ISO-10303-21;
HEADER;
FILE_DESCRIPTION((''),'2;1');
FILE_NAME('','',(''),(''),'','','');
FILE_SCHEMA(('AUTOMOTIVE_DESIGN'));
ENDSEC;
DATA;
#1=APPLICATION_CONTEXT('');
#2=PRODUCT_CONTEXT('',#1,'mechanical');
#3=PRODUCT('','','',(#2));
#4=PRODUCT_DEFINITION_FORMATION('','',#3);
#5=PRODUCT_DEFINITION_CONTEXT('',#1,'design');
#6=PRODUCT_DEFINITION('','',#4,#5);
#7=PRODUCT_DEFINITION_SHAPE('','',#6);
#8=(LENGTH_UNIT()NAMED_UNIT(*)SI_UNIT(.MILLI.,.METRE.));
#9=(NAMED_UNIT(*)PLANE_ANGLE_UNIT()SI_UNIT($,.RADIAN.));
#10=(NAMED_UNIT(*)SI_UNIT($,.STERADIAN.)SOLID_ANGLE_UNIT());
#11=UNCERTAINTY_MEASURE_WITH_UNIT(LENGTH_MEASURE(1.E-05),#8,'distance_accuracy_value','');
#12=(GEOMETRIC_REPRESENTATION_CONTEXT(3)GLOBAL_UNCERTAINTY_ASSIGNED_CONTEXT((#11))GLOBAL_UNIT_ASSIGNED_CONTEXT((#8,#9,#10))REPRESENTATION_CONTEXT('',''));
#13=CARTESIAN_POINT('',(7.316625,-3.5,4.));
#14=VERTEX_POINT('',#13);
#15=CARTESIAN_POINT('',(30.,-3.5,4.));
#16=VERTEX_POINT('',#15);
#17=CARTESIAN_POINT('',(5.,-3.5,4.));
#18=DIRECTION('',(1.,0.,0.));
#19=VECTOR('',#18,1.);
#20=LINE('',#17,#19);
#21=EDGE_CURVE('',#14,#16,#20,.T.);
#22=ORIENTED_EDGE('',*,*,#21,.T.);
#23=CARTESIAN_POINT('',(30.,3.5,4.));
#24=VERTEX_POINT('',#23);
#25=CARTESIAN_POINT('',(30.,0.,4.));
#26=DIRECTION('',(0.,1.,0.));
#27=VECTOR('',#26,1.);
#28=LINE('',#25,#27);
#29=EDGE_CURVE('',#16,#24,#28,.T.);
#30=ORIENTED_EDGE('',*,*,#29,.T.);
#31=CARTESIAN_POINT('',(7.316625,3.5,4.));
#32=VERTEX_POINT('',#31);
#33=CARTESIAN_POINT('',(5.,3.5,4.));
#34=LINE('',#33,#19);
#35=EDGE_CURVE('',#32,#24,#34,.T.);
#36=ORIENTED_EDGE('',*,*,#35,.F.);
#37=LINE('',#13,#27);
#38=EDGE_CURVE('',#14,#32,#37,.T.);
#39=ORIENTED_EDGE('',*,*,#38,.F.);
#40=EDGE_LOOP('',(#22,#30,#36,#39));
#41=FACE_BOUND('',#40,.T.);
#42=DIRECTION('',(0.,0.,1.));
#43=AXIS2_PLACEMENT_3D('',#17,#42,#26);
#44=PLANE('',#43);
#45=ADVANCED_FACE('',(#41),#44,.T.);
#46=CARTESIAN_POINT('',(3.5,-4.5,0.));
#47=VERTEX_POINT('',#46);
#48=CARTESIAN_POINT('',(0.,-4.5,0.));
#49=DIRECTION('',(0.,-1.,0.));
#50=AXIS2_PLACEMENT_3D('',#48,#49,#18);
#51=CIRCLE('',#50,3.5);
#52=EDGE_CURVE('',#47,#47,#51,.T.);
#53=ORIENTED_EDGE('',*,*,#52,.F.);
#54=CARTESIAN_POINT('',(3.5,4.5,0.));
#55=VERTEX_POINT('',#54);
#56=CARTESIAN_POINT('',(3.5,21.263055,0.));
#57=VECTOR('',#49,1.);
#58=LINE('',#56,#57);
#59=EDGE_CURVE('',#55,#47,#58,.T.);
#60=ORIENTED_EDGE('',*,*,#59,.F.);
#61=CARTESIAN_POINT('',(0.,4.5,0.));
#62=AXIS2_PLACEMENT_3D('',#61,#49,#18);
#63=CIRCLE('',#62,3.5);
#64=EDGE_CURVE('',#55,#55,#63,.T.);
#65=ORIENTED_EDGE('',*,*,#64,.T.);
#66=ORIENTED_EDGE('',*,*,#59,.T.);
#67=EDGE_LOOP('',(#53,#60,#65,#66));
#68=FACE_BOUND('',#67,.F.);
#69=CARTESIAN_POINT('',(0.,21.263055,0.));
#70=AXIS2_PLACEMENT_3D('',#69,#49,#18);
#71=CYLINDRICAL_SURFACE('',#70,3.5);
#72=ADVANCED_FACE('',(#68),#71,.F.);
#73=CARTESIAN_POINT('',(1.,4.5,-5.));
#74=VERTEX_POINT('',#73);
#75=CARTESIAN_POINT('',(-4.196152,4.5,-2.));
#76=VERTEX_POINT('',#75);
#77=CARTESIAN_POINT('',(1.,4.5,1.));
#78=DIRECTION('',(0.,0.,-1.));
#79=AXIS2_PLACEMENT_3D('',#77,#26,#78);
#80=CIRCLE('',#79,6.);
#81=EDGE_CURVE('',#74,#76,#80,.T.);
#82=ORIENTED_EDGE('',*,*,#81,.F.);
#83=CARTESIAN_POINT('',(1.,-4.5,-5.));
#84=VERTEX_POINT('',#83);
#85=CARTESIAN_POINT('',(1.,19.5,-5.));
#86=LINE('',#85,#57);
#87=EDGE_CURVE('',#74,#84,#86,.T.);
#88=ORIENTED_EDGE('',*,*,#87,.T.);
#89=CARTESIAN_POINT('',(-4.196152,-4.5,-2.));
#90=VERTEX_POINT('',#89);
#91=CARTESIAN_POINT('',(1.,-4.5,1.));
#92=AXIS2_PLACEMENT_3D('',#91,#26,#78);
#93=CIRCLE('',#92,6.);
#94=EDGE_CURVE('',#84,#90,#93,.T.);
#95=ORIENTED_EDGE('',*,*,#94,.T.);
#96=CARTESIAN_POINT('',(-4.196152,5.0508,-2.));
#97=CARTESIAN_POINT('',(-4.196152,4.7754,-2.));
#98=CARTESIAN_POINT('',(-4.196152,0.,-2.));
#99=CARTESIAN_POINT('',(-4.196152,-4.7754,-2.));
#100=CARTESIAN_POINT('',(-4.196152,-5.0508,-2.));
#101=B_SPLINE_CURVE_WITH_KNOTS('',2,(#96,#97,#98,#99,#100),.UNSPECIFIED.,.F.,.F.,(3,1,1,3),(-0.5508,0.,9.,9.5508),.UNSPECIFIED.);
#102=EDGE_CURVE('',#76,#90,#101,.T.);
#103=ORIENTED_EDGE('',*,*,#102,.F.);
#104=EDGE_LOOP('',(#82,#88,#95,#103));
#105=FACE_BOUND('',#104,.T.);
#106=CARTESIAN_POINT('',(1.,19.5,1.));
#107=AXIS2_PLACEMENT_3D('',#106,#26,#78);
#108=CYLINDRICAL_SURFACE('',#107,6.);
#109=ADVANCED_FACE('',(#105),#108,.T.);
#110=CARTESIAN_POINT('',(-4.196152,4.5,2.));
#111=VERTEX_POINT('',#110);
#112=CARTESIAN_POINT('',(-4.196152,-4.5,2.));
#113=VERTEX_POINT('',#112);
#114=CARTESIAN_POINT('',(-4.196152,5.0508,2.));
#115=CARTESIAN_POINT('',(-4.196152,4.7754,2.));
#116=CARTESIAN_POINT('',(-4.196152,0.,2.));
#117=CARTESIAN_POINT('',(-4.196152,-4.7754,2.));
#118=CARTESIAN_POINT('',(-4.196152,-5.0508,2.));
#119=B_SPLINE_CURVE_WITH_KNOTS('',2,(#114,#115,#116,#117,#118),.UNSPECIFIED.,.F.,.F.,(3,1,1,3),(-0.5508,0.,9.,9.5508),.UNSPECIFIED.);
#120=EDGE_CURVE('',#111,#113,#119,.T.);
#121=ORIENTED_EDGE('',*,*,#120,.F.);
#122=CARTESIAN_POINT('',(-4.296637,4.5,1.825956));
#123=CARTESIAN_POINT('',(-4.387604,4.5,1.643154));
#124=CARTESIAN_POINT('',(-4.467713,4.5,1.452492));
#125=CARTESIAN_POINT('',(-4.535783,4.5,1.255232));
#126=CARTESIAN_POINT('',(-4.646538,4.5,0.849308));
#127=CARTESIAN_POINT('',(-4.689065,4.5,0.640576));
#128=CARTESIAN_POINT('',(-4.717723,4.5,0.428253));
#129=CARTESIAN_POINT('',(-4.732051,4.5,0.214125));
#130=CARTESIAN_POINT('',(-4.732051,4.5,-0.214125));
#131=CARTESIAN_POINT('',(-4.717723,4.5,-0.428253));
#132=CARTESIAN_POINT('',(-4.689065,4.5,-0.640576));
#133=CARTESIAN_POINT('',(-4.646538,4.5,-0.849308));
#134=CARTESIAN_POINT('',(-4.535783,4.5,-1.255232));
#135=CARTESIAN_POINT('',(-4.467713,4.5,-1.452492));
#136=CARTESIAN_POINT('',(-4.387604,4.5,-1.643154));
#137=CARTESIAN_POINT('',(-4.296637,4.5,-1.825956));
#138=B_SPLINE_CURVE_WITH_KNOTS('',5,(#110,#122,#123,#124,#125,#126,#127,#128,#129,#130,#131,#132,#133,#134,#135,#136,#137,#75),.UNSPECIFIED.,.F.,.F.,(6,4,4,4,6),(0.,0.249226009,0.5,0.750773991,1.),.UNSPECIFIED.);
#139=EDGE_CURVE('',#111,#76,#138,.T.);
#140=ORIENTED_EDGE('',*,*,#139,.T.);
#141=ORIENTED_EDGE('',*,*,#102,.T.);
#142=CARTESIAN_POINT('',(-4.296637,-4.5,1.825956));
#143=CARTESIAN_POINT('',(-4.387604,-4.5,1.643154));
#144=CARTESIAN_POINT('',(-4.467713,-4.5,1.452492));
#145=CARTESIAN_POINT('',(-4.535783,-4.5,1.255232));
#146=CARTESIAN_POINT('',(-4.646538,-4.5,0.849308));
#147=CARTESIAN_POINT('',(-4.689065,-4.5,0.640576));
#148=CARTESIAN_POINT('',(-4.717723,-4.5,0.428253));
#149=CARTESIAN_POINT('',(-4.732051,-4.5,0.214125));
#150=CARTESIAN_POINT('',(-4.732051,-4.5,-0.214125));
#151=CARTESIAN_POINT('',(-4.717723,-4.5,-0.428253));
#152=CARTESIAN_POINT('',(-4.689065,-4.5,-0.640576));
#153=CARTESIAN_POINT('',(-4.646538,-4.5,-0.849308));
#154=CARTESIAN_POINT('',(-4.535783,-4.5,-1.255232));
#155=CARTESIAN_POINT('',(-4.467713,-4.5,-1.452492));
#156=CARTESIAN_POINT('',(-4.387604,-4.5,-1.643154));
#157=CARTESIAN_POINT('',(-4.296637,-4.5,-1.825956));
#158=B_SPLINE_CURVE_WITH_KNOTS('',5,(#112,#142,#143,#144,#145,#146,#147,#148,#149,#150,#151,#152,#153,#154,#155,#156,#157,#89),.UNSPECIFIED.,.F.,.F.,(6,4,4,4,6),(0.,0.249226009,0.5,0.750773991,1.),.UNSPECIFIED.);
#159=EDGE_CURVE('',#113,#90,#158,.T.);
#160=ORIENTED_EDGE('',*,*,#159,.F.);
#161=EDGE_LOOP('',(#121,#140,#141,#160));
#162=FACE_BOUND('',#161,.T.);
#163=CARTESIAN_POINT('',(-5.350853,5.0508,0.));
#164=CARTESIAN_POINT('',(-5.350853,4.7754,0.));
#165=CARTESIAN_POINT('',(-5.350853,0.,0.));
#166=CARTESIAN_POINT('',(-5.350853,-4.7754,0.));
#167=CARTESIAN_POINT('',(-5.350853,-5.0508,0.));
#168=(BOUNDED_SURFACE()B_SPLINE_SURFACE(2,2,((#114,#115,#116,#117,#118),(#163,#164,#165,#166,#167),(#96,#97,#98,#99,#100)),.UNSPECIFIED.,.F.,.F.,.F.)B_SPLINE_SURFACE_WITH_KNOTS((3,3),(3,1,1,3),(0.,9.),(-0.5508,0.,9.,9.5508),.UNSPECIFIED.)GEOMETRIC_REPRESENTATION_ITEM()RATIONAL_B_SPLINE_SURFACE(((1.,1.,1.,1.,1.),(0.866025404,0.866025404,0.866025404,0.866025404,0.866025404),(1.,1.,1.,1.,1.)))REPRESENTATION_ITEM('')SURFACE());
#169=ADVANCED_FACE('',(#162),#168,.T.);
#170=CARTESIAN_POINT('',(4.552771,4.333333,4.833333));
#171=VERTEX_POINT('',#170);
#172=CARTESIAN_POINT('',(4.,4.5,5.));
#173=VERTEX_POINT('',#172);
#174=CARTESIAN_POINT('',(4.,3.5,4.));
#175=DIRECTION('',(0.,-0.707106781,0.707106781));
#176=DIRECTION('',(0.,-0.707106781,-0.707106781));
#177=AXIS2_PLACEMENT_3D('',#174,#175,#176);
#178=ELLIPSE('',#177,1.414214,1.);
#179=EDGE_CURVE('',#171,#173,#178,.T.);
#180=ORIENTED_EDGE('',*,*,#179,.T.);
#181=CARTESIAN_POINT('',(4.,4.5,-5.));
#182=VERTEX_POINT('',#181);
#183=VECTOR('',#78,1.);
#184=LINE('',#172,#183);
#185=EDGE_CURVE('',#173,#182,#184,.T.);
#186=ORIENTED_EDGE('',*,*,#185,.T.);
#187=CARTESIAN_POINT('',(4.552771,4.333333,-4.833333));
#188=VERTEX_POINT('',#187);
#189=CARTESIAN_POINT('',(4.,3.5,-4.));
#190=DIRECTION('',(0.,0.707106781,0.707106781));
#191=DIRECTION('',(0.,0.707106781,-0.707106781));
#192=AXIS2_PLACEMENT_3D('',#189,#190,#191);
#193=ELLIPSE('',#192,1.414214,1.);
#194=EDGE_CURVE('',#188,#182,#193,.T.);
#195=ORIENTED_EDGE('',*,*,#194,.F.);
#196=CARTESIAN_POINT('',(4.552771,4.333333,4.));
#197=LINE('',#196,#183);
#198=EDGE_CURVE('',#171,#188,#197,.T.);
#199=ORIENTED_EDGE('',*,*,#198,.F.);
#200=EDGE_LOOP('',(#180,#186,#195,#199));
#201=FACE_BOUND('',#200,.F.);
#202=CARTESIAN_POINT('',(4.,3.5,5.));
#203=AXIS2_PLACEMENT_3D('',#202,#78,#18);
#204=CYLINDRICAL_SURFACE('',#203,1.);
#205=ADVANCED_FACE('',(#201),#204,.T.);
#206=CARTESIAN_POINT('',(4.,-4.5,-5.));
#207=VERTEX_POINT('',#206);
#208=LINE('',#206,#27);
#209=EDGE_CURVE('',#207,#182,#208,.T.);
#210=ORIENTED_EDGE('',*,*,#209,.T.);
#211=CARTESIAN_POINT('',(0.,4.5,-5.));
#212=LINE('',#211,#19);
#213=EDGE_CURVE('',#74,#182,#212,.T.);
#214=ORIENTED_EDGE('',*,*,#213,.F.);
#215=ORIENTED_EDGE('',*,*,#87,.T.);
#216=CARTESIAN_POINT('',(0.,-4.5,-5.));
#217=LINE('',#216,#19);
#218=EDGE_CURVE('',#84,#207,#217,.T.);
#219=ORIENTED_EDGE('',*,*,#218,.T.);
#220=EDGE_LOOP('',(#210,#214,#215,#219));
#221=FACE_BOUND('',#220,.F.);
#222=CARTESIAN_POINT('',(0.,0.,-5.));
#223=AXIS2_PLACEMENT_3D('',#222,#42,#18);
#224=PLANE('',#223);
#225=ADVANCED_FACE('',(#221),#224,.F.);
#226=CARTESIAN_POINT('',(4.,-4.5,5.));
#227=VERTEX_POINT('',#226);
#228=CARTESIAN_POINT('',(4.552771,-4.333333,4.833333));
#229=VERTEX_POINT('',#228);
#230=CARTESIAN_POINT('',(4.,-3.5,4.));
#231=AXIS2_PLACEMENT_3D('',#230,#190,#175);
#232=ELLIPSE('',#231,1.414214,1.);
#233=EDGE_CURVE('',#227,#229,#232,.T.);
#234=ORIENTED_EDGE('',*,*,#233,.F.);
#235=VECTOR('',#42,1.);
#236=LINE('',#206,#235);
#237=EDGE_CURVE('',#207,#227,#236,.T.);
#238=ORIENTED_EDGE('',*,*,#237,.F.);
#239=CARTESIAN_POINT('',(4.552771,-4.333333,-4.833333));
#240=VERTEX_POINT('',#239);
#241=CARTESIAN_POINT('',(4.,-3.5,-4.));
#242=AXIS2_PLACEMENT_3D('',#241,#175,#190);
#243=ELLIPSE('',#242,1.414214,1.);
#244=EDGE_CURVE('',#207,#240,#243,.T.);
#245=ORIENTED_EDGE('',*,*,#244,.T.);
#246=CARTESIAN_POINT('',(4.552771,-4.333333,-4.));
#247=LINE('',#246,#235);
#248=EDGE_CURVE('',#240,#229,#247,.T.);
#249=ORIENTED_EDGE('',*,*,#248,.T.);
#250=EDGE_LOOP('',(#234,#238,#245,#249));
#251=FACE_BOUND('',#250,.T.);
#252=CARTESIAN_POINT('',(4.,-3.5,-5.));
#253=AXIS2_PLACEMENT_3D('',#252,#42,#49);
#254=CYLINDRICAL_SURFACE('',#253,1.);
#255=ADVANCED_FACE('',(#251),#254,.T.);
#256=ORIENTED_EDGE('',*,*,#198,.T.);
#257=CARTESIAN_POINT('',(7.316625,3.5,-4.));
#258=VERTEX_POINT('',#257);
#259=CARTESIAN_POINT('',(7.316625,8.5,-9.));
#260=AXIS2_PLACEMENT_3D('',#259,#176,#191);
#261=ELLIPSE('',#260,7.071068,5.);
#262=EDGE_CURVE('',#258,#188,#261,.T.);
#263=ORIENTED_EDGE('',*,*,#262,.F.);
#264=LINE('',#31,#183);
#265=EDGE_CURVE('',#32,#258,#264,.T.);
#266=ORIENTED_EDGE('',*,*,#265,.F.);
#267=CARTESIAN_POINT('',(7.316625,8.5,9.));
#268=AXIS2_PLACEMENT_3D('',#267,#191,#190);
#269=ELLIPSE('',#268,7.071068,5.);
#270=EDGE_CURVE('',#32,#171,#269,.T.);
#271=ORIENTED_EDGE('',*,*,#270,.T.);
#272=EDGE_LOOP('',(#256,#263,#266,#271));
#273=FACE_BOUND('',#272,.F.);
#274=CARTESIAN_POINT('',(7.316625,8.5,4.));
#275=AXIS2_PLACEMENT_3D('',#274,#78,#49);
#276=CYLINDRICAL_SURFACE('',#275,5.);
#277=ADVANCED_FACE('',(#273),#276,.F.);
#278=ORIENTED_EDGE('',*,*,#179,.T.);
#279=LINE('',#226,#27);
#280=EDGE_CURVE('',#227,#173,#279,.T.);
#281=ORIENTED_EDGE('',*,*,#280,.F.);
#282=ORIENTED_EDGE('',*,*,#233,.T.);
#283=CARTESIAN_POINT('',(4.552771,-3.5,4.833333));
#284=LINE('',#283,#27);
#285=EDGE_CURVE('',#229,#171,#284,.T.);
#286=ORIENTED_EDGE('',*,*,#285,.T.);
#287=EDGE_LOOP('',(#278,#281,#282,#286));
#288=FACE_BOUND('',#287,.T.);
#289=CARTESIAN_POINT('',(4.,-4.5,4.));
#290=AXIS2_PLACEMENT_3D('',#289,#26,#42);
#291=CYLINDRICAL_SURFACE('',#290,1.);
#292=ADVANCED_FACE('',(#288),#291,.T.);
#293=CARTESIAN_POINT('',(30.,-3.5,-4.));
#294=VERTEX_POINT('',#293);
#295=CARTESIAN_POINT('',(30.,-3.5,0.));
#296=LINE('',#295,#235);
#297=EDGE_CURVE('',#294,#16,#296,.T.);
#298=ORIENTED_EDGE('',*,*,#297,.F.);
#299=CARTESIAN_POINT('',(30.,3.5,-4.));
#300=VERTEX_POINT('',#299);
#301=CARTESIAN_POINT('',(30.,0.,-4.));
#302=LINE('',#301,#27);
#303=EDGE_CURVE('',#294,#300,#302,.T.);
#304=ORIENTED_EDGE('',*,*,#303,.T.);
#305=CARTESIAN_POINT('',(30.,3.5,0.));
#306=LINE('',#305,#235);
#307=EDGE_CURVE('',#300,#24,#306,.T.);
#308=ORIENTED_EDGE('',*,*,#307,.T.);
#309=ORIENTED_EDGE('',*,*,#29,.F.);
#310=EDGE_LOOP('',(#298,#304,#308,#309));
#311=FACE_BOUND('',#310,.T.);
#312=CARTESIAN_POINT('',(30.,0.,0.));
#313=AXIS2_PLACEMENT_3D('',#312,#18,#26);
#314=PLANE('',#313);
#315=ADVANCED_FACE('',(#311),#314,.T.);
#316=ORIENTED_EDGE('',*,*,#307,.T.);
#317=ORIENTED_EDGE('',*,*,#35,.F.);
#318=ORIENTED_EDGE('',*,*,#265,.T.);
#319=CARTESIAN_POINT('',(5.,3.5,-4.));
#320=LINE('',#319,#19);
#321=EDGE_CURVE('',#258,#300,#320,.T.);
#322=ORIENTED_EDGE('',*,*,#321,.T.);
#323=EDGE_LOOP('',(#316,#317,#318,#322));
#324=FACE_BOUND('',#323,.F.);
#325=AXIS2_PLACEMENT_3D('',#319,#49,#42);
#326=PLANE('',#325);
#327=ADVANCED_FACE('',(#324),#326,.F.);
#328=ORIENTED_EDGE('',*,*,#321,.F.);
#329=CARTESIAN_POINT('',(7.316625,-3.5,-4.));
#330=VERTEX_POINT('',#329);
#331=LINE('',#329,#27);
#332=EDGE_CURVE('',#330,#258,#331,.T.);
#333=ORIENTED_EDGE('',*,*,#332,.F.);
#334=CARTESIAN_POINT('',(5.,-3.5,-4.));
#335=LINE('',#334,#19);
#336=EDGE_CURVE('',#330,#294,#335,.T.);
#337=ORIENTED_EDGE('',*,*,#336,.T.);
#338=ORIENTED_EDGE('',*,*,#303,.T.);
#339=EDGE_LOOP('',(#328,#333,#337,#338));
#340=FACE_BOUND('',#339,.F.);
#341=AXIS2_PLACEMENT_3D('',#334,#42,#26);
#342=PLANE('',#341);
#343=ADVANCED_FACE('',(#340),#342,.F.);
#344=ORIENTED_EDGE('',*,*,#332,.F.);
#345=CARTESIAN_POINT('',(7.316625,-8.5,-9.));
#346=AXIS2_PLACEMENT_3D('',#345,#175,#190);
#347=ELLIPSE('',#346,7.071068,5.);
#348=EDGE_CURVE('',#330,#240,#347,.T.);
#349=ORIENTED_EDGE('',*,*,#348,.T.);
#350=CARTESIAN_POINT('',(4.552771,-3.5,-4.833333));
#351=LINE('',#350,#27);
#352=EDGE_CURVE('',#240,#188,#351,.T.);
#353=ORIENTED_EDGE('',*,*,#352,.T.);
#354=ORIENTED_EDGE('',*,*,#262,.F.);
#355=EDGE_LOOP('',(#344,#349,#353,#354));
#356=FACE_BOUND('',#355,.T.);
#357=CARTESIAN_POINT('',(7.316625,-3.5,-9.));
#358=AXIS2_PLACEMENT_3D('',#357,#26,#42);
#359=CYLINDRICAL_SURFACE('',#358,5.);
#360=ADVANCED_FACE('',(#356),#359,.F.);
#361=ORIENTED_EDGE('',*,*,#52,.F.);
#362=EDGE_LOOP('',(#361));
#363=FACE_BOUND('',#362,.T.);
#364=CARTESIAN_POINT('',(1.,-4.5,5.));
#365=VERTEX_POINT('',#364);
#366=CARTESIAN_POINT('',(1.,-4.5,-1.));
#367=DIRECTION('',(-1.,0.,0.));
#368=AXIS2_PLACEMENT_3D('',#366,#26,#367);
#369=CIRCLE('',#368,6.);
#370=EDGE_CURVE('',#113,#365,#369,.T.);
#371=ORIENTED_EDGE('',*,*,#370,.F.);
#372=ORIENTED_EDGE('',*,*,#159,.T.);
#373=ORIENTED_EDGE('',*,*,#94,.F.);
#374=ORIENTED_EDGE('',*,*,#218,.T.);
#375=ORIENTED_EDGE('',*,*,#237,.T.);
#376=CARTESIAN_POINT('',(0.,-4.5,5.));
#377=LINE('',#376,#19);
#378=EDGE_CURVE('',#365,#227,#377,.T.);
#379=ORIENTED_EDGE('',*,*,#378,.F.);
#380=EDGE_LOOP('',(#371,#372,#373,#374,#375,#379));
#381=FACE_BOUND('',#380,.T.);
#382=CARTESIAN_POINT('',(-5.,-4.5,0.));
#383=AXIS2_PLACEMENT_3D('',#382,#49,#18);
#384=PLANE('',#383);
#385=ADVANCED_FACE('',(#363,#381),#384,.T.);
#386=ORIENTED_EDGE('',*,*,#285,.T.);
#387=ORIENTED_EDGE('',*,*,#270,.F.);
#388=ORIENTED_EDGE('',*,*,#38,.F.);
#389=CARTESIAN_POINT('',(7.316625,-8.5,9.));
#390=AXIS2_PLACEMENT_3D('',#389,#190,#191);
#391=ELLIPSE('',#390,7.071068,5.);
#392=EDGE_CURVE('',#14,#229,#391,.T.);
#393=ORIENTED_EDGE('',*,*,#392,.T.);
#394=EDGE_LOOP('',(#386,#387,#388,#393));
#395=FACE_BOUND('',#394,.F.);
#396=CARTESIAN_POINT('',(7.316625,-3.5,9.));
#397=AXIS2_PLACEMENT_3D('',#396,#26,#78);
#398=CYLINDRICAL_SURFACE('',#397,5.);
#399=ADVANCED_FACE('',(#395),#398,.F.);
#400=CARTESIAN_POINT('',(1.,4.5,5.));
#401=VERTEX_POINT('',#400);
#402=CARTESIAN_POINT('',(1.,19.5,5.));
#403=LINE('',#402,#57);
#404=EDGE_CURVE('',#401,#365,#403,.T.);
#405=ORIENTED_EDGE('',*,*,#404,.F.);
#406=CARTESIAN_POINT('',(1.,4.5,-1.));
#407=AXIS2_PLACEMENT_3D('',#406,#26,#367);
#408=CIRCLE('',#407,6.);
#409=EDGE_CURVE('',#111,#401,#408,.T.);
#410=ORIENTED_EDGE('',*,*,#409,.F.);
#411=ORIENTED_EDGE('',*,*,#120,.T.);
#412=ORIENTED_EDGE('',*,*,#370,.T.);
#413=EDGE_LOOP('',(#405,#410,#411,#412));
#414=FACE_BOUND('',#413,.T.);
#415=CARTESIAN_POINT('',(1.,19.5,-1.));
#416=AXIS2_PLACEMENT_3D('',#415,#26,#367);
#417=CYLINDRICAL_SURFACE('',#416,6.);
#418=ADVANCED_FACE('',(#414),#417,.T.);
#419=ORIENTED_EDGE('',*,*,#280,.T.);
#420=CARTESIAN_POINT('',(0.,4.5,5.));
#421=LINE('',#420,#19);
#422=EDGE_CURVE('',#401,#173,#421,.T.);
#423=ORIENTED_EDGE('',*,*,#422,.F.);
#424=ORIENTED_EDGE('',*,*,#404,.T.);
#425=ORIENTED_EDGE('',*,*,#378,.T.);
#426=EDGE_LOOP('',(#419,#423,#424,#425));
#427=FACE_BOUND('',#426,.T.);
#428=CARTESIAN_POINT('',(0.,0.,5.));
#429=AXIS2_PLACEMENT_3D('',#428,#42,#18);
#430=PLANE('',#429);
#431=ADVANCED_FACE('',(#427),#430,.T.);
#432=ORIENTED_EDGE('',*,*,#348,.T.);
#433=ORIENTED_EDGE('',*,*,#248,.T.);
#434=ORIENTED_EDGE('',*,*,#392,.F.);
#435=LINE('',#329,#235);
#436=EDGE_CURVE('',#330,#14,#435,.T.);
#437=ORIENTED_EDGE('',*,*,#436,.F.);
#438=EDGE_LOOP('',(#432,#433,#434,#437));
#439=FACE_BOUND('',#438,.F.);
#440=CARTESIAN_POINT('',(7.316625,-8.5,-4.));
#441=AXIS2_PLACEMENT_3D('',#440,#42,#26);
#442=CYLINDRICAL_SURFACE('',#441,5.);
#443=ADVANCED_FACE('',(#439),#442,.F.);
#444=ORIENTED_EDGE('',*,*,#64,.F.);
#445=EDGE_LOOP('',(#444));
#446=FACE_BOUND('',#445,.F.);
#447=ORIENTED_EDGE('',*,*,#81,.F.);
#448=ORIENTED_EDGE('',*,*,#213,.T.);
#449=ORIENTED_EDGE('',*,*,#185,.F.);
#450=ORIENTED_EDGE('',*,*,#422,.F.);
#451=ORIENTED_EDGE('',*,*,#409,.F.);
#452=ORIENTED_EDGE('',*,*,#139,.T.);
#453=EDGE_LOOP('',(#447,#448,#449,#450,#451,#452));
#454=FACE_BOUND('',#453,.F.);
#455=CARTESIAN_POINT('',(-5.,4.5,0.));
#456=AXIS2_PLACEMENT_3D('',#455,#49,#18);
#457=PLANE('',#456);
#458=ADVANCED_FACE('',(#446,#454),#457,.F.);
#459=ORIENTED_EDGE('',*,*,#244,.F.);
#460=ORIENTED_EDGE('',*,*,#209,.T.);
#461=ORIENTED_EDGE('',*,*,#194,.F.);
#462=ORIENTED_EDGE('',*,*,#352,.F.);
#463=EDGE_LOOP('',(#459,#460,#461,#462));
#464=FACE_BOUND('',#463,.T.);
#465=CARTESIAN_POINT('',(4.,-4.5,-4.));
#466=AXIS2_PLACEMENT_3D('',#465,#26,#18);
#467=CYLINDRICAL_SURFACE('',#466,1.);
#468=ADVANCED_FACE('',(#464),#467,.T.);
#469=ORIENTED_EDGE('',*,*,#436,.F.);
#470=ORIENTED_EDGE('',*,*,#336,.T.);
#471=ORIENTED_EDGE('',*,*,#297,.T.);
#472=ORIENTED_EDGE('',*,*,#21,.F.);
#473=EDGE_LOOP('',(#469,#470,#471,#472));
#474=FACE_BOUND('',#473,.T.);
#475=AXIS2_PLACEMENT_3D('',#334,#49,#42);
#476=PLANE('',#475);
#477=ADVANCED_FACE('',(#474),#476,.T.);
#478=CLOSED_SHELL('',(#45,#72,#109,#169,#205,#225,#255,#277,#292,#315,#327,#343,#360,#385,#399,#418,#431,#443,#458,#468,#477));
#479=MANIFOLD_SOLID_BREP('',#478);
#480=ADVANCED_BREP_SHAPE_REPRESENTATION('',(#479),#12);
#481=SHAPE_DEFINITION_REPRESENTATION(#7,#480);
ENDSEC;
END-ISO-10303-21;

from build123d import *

# Parameters (mm, degrees)
F0_W        = 10
F0_H        = 9
F1_DEPTH    = 5
F3_D        = 7
F4_T1_DEPTH = 39
F5_R        = 1
F6_W        = 7
F6_H        = 8
F7_DEPTH    = 25
F8_R        = 5
F9_R        = 4


# Not quite as in the source:
# - a fillet or chamfer that OpenCascade refuses, or shapes differently, is made with other operations: its cross-section is extruded or revolved along the edge and cut away or added


with BuildPart() as f1:
    # F0 (on Top) → F1 (new body, symmetric)
    with BuildSketch(Plane.XY):
        Rectangle(F0_W, F0_H)
    extrude(amount=F1_DEPTH, both=True)

    # F3 (through all)
    with Locations(Plane(origin=(0, 4.5, 0), x_dir=(-1, 0, 0), z_dir=(0, 1, 0))):
        with Locations((0, 0)):
            Hole(F3_D / 2)

    # F4: fillet of radius 6 on 2 edges, made by hand

    # F4_s2 → F4_t1 (cut)
    with BuildSketch(Plane.XZ.offset(-19.5)):
        with BuildLine():
            ThreePointArc((-5, -1), (-3.2426406871, 3.2426406871), (1, 5))
            Line((1, 5), (-5, 5))
            Line((-5, 5), (-5, -1))
        make_face()
        with BuildLine():
            ThreePointArc((1, -5), (-3.2426406871, -3.2426406871), (-5, 1))
            Line((-5, 1), (-5, -5))
            Line((-5, -5), (1, -5))
        make_face()
    extrude(amount=F4_T1_DEPTH, mode=Mode.SUBTRACT)

    # F5
    f5_edges = [f1.edges().sort_by_distance(p)[0] for p in [
        (5, -4.5, 0),
        (5, 0, -5),
        (5, 4.5, 0),
        (5, 0, 5),
    ]]
    fillet(f5_edges, radius=F5_R)

    # F6 (on face) → F7 (join)
    with BuildSketch(Plane.YZ.offset(5)):
        Rectangle(F6_W, F6_H)
    extrude(amount=F7_DEPTH)

    # F8
    f8_edges = [f1.edges().sort_by_distance(p)[0] for p in [
        (5, 0, 4),
        (5, -3.5, 0),
        (5, 3.5, 0),
        (5, 0, -4),
    ]]
    fillet(f8_edges, radius=F8_R)

    # F9
    f9_edges = [f1.edges().sort_by_distance(p)[0] for p in [
        (-4.91608, 0, 0),
    ]]
    fillet(f9_edges, radius=F9_R)


solid = f1.part
